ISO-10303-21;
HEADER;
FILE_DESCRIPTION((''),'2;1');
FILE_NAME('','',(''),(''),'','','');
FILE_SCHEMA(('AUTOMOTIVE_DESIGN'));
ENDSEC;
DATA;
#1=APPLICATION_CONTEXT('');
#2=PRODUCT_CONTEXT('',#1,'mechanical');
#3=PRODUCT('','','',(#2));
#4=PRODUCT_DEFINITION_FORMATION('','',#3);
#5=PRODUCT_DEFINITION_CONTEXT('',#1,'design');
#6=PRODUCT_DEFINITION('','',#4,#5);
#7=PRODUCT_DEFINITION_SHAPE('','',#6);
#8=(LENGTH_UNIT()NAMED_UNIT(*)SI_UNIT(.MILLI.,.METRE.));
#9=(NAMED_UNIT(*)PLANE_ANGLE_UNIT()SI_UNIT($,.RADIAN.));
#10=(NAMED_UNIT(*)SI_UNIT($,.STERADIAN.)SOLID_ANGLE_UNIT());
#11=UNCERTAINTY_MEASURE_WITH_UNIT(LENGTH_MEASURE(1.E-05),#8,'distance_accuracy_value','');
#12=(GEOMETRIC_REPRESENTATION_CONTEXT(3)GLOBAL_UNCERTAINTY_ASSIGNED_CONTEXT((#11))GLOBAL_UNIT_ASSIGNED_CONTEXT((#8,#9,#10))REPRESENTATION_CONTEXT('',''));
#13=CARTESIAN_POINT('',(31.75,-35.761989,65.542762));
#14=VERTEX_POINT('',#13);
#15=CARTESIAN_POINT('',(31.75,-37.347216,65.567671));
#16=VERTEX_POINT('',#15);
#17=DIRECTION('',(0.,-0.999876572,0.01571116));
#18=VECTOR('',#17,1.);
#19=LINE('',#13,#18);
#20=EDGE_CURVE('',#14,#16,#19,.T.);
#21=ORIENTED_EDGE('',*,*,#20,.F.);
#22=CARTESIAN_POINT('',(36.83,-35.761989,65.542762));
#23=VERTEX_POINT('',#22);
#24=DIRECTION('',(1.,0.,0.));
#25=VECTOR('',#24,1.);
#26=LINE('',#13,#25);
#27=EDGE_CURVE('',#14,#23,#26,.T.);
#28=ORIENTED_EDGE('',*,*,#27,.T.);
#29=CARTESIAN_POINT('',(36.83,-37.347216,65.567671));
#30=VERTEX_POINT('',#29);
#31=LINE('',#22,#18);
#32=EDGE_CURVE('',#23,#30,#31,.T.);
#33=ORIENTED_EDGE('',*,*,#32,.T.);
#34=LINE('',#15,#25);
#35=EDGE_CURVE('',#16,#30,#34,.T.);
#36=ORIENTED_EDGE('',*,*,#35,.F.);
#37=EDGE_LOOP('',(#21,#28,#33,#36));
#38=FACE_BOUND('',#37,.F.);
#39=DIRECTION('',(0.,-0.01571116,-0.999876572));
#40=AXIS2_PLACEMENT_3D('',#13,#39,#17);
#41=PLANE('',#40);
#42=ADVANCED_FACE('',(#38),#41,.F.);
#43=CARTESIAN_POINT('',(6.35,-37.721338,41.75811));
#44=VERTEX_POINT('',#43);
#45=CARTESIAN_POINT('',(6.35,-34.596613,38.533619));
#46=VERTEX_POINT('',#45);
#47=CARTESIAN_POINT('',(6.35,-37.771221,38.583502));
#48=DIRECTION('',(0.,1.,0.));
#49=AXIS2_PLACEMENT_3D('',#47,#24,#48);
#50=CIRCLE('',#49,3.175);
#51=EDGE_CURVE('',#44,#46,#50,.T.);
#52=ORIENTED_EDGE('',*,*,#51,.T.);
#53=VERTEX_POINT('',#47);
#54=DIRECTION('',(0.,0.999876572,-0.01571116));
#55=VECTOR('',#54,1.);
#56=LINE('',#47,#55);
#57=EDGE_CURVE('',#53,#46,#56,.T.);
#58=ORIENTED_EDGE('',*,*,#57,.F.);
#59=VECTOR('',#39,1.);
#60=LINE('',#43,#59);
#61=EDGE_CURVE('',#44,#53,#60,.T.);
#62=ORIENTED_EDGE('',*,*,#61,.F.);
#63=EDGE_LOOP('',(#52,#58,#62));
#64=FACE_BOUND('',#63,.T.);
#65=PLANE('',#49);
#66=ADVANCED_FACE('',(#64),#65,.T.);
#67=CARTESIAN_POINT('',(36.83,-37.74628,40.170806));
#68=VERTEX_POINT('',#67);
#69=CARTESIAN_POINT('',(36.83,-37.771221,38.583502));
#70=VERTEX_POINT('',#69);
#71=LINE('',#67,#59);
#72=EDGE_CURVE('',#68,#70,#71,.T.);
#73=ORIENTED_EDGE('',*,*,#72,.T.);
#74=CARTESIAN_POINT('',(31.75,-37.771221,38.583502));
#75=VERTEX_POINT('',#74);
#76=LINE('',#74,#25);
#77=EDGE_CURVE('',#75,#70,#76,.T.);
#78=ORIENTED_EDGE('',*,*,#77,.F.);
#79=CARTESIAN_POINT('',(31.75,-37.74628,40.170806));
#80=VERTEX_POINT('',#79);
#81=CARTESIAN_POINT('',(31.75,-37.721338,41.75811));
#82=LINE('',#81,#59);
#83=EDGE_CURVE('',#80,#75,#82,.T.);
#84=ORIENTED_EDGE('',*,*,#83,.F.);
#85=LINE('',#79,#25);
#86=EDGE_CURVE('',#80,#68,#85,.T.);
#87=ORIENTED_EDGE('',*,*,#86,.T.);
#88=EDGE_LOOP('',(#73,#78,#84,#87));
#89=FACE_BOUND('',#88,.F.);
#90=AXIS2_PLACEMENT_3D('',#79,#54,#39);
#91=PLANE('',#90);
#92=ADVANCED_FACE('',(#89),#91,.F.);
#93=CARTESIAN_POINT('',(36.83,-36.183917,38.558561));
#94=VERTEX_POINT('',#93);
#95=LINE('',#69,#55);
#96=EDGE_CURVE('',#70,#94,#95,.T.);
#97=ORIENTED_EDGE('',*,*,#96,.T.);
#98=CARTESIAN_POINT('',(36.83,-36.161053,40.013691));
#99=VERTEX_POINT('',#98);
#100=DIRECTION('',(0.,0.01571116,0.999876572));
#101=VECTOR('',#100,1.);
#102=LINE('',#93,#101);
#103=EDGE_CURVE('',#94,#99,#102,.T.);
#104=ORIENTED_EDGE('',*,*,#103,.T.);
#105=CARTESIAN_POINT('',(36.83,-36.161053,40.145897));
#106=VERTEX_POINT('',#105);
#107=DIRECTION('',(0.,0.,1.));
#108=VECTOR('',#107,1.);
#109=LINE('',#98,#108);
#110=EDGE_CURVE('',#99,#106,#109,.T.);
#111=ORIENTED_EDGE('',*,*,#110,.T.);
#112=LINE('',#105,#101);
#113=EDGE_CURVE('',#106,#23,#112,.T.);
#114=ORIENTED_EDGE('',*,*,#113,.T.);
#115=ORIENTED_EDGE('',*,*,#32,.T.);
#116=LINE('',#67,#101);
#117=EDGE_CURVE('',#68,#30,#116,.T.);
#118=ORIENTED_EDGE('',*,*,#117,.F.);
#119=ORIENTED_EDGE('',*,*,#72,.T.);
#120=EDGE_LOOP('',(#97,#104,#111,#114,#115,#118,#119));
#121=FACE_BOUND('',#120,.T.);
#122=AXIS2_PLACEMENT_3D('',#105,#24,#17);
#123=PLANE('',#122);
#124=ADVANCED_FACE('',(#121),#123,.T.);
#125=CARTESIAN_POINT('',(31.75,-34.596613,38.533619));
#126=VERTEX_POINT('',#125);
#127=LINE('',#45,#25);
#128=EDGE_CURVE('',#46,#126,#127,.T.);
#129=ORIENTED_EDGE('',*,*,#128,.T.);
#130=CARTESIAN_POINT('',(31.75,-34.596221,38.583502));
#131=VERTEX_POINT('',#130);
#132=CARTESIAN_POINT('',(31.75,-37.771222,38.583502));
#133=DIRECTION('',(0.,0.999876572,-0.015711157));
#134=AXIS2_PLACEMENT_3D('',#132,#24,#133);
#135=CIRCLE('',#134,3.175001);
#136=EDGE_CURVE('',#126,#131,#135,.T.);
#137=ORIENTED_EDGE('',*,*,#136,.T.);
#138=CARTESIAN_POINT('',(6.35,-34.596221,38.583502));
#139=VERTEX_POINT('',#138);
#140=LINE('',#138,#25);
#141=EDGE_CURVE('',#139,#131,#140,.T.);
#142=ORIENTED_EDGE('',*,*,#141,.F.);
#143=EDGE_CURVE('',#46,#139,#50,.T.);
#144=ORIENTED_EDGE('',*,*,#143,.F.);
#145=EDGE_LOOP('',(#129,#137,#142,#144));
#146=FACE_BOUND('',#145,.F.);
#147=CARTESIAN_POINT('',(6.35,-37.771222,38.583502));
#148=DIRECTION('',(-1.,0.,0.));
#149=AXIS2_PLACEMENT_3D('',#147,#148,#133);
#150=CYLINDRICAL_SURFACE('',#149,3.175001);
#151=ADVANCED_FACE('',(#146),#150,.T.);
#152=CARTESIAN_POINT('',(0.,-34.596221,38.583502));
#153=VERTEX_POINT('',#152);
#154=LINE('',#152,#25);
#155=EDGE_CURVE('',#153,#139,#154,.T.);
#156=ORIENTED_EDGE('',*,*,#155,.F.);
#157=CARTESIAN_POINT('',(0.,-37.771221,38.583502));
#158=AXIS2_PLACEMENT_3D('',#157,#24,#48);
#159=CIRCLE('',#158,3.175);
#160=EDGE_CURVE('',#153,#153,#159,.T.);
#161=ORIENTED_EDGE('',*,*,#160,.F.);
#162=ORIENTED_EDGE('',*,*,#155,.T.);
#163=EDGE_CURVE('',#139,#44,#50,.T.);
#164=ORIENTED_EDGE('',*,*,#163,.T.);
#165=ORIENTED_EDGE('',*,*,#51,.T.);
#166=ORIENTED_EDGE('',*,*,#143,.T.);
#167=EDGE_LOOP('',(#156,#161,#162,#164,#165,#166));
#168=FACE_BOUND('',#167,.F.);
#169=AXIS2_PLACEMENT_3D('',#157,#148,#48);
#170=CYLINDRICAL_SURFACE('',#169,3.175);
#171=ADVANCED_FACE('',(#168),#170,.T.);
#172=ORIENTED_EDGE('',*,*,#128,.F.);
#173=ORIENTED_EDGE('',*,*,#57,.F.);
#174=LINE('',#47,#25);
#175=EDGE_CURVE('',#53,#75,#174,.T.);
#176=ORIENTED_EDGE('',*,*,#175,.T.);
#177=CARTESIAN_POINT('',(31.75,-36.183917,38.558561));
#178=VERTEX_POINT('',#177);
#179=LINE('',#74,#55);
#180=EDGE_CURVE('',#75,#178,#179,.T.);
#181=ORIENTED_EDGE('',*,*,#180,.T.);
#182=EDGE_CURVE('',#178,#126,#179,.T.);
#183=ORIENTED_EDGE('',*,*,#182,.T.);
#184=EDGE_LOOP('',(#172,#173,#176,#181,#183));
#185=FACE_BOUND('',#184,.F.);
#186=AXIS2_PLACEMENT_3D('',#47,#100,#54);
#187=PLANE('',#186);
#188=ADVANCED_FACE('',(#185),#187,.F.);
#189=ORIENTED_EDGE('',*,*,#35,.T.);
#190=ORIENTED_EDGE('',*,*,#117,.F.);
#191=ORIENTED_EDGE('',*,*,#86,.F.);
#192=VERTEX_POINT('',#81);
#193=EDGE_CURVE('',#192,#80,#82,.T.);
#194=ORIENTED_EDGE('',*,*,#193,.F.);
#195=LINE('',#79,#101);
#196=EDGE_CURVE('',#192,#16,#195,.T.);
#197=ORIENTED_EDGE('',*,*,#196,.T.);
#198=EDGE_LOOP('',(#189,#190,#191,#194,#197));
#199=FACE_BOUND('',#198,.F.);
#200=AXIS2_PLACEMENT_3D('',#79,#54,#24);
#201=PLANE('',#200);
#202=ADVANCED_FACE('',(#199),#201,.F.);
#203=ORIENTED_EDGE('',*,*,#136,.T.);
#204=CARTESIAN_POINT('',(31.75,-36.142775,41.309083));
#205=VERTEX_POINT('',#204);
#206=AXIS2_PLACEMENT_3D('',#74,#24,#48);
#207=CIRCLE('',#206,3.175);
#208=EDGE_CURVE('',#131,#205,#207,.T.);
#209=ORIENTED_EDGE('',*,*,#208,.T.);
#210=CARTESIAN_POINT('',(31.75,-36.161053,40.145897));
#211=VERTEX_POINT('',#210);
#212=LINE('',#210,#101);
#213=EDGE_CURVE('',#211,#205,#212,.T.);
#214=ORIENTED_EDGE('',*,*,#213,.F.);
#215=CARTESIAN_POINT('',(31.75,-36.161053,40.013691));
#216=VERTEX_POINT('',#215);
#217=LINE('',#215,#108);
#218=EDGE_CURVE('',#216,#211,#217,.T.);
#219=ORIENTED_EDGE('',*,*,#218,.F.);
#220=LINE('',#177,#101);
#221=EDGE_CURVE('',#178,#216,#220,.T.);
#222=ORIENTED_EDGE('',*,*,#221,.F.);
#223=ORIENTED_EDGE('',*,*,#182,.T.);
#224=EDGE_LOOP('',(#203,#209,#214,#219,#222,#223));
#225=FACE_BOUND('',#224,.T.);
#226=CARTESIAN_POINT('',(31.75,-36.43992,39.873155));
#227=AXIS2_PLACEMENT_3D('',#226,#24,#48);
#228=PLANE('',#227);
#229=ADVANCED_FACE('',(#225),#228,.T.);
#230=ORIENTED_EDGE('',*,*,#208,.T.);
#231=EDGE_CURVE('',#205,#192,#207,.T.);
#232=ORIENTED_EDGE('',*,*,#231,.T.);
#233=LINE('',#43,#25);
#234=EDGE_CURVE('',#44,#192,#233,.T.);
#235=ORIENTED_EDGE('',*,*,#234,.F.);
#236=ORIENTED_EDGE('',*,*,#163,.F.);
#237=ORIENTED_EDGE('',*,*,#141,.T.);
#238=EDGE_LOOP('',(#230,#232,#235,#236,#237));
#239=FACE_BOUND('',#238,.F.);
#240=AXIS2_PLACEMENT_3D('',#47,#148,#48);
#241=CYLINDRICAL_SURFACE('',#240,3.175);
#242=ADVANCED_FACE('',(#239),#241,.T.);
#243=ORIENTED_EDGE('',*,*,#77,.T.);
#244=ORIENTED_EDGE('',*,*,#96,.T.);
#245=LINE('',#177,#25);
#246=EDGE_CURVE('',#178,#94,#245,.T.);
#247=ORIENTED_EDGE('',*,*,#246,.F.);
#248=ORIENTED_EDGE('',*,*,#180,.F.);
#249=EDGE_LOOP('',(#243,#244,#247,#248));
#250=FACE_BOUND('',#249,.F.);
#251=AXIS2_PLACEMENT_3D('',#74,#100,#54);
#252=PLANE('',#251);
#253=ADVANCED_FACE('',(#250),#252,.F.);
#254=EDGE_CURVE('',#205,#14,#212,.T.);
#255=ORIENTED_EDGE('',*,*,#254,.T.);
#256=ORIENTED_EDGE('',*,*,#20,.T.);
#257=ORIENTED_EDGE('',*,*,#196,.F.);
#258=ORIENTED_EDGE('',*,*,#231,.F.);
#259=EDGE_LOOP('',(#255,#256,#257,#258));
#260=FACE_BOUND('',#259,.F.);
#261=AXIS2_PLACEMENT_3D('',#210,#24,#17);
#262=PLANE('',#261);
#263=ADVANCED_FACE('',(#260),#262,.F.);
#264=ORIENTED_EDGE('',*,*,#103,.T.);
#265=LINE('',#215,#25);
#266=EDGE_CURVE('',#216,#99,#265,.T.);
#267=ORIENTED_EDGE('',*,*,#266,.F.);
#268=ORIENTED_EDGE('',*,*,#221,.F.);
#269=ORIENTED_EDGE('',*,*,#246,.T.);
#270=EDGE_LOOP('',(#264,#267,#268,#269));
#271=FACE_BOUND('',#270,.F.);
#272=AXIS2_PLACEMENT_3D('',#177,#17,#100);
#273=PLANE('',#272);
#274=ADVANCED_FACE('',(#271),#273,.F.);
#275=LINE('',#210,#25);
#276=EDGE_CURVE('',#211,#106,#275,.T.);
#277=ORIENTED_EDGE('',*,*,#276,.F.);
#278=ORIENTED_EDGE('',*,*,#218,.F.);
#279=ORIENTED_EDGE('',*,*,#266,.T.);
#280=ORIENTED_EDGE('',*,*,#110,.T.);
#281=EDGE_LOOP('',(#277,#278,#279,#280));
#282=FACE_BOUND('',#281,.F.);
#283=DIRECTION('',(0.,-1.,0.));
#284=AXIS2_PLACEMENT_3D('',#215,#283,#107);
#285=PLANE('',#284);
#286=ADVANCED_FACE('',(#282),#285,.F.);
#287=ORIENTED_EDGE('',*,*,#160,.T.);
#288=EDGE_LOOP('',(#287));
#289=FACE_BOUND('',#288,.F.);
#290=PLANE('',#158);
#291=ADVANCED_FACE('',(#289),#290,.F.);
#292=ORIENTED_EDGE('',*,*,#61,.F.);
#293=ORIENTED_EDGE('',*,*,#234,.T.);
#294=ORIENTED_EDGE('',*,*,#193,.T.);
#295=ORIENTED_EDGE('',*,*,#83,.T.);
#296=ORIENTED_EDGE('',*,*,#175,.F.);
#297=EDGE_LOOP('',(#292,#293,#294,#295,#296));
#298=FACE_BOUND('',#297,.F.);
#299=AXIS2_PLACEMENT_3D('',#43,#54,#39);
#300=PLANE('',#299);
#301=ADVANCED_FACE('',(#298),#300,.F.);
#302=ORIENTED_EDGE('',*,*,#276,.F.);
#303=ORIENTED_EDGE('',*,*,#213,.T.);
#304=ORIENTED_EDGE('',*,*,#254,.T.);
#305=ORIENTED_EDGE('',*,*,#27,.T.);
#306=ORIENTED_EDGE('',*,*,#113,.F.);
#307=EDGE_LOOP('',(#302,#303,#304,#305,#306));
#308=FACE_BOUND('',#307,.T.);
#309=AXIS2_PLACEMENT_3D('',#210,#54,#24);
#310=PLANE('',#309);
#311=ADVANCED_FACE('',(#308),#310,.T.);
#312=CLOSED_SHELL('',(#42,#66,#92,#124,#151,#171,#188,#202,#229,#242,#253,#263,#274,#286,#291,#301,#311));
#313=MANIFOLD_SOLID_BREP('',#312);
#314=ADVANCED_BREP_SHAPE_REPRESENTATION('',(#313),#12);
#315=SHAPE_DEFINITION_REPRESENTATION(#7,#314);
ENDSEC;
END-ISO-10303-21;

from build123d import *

# Parameters (mm, degrees)
F0_R     = 3.175
F1_DEPTH = 6.35
F5_DEPTH = 25.4
F7_DEPTH = 5.08
F8_DEPTH = 25.4


# Not quite as in the source:
# - the program builds the solid bodies; features that only make, move or delete a surface that nothing else refers to are left out


with BuildPart() as f1:
    # F0 (on Right) → F1 (new body)
    with BuildSketch(Plane.YZ):
        with Locations((-37.7712212503, 38.5835021734)):
            Circle(F0_R)
    extrude(amount=F1_DEPTH)

    # F4 (on face) → F5 (join)
    with BuildSketch(Plane.YZ.offset(6.35)):
        with BuildLine():
            ThreePointArc((-34.5962212503, 38.5835021734), (-35.5085896731, 40.8108601029), (-37.7213383186, 41.7581102899))
            Line((-37.7213383186, 41.7581102899), (-37.7712212503, 38.5835021734))
            Line((-37.7712212503, 38.5835021734), (-34.5966131338, 38.5336192417))
            ThreePointArc((-34.5966131338, 38.5336192417), (-34.5963192227, 38.5585599379), (-34.5962212503, 38.5835021734))
        make_face()
    extrude(amount=F5_DEPTH)

    # F6 (on face) → F7 (join)
    with BuildSketch(Plane.YZ.offset(31.75)):
        Polygon((-37.7712212503, 38.5835021734), (-36.1839171921, 38.5585607076), (-36.1610525797, 40.0136913835), (-36.1610525797, 40.1458973996), (-37.7462797844, 40.1708062317), align=None)
    extrude(amount=F7_DEPTH)

    # F8 (add): a face of the model
    f8_faces = [f1.faces().sort_by_distance(p)[0] for p in [
        (34.29, -36.953666182, 40.1583518156),
    ]]
    extrude(f8_faces, amount=F8_DEPTH)


solid = f1.part
